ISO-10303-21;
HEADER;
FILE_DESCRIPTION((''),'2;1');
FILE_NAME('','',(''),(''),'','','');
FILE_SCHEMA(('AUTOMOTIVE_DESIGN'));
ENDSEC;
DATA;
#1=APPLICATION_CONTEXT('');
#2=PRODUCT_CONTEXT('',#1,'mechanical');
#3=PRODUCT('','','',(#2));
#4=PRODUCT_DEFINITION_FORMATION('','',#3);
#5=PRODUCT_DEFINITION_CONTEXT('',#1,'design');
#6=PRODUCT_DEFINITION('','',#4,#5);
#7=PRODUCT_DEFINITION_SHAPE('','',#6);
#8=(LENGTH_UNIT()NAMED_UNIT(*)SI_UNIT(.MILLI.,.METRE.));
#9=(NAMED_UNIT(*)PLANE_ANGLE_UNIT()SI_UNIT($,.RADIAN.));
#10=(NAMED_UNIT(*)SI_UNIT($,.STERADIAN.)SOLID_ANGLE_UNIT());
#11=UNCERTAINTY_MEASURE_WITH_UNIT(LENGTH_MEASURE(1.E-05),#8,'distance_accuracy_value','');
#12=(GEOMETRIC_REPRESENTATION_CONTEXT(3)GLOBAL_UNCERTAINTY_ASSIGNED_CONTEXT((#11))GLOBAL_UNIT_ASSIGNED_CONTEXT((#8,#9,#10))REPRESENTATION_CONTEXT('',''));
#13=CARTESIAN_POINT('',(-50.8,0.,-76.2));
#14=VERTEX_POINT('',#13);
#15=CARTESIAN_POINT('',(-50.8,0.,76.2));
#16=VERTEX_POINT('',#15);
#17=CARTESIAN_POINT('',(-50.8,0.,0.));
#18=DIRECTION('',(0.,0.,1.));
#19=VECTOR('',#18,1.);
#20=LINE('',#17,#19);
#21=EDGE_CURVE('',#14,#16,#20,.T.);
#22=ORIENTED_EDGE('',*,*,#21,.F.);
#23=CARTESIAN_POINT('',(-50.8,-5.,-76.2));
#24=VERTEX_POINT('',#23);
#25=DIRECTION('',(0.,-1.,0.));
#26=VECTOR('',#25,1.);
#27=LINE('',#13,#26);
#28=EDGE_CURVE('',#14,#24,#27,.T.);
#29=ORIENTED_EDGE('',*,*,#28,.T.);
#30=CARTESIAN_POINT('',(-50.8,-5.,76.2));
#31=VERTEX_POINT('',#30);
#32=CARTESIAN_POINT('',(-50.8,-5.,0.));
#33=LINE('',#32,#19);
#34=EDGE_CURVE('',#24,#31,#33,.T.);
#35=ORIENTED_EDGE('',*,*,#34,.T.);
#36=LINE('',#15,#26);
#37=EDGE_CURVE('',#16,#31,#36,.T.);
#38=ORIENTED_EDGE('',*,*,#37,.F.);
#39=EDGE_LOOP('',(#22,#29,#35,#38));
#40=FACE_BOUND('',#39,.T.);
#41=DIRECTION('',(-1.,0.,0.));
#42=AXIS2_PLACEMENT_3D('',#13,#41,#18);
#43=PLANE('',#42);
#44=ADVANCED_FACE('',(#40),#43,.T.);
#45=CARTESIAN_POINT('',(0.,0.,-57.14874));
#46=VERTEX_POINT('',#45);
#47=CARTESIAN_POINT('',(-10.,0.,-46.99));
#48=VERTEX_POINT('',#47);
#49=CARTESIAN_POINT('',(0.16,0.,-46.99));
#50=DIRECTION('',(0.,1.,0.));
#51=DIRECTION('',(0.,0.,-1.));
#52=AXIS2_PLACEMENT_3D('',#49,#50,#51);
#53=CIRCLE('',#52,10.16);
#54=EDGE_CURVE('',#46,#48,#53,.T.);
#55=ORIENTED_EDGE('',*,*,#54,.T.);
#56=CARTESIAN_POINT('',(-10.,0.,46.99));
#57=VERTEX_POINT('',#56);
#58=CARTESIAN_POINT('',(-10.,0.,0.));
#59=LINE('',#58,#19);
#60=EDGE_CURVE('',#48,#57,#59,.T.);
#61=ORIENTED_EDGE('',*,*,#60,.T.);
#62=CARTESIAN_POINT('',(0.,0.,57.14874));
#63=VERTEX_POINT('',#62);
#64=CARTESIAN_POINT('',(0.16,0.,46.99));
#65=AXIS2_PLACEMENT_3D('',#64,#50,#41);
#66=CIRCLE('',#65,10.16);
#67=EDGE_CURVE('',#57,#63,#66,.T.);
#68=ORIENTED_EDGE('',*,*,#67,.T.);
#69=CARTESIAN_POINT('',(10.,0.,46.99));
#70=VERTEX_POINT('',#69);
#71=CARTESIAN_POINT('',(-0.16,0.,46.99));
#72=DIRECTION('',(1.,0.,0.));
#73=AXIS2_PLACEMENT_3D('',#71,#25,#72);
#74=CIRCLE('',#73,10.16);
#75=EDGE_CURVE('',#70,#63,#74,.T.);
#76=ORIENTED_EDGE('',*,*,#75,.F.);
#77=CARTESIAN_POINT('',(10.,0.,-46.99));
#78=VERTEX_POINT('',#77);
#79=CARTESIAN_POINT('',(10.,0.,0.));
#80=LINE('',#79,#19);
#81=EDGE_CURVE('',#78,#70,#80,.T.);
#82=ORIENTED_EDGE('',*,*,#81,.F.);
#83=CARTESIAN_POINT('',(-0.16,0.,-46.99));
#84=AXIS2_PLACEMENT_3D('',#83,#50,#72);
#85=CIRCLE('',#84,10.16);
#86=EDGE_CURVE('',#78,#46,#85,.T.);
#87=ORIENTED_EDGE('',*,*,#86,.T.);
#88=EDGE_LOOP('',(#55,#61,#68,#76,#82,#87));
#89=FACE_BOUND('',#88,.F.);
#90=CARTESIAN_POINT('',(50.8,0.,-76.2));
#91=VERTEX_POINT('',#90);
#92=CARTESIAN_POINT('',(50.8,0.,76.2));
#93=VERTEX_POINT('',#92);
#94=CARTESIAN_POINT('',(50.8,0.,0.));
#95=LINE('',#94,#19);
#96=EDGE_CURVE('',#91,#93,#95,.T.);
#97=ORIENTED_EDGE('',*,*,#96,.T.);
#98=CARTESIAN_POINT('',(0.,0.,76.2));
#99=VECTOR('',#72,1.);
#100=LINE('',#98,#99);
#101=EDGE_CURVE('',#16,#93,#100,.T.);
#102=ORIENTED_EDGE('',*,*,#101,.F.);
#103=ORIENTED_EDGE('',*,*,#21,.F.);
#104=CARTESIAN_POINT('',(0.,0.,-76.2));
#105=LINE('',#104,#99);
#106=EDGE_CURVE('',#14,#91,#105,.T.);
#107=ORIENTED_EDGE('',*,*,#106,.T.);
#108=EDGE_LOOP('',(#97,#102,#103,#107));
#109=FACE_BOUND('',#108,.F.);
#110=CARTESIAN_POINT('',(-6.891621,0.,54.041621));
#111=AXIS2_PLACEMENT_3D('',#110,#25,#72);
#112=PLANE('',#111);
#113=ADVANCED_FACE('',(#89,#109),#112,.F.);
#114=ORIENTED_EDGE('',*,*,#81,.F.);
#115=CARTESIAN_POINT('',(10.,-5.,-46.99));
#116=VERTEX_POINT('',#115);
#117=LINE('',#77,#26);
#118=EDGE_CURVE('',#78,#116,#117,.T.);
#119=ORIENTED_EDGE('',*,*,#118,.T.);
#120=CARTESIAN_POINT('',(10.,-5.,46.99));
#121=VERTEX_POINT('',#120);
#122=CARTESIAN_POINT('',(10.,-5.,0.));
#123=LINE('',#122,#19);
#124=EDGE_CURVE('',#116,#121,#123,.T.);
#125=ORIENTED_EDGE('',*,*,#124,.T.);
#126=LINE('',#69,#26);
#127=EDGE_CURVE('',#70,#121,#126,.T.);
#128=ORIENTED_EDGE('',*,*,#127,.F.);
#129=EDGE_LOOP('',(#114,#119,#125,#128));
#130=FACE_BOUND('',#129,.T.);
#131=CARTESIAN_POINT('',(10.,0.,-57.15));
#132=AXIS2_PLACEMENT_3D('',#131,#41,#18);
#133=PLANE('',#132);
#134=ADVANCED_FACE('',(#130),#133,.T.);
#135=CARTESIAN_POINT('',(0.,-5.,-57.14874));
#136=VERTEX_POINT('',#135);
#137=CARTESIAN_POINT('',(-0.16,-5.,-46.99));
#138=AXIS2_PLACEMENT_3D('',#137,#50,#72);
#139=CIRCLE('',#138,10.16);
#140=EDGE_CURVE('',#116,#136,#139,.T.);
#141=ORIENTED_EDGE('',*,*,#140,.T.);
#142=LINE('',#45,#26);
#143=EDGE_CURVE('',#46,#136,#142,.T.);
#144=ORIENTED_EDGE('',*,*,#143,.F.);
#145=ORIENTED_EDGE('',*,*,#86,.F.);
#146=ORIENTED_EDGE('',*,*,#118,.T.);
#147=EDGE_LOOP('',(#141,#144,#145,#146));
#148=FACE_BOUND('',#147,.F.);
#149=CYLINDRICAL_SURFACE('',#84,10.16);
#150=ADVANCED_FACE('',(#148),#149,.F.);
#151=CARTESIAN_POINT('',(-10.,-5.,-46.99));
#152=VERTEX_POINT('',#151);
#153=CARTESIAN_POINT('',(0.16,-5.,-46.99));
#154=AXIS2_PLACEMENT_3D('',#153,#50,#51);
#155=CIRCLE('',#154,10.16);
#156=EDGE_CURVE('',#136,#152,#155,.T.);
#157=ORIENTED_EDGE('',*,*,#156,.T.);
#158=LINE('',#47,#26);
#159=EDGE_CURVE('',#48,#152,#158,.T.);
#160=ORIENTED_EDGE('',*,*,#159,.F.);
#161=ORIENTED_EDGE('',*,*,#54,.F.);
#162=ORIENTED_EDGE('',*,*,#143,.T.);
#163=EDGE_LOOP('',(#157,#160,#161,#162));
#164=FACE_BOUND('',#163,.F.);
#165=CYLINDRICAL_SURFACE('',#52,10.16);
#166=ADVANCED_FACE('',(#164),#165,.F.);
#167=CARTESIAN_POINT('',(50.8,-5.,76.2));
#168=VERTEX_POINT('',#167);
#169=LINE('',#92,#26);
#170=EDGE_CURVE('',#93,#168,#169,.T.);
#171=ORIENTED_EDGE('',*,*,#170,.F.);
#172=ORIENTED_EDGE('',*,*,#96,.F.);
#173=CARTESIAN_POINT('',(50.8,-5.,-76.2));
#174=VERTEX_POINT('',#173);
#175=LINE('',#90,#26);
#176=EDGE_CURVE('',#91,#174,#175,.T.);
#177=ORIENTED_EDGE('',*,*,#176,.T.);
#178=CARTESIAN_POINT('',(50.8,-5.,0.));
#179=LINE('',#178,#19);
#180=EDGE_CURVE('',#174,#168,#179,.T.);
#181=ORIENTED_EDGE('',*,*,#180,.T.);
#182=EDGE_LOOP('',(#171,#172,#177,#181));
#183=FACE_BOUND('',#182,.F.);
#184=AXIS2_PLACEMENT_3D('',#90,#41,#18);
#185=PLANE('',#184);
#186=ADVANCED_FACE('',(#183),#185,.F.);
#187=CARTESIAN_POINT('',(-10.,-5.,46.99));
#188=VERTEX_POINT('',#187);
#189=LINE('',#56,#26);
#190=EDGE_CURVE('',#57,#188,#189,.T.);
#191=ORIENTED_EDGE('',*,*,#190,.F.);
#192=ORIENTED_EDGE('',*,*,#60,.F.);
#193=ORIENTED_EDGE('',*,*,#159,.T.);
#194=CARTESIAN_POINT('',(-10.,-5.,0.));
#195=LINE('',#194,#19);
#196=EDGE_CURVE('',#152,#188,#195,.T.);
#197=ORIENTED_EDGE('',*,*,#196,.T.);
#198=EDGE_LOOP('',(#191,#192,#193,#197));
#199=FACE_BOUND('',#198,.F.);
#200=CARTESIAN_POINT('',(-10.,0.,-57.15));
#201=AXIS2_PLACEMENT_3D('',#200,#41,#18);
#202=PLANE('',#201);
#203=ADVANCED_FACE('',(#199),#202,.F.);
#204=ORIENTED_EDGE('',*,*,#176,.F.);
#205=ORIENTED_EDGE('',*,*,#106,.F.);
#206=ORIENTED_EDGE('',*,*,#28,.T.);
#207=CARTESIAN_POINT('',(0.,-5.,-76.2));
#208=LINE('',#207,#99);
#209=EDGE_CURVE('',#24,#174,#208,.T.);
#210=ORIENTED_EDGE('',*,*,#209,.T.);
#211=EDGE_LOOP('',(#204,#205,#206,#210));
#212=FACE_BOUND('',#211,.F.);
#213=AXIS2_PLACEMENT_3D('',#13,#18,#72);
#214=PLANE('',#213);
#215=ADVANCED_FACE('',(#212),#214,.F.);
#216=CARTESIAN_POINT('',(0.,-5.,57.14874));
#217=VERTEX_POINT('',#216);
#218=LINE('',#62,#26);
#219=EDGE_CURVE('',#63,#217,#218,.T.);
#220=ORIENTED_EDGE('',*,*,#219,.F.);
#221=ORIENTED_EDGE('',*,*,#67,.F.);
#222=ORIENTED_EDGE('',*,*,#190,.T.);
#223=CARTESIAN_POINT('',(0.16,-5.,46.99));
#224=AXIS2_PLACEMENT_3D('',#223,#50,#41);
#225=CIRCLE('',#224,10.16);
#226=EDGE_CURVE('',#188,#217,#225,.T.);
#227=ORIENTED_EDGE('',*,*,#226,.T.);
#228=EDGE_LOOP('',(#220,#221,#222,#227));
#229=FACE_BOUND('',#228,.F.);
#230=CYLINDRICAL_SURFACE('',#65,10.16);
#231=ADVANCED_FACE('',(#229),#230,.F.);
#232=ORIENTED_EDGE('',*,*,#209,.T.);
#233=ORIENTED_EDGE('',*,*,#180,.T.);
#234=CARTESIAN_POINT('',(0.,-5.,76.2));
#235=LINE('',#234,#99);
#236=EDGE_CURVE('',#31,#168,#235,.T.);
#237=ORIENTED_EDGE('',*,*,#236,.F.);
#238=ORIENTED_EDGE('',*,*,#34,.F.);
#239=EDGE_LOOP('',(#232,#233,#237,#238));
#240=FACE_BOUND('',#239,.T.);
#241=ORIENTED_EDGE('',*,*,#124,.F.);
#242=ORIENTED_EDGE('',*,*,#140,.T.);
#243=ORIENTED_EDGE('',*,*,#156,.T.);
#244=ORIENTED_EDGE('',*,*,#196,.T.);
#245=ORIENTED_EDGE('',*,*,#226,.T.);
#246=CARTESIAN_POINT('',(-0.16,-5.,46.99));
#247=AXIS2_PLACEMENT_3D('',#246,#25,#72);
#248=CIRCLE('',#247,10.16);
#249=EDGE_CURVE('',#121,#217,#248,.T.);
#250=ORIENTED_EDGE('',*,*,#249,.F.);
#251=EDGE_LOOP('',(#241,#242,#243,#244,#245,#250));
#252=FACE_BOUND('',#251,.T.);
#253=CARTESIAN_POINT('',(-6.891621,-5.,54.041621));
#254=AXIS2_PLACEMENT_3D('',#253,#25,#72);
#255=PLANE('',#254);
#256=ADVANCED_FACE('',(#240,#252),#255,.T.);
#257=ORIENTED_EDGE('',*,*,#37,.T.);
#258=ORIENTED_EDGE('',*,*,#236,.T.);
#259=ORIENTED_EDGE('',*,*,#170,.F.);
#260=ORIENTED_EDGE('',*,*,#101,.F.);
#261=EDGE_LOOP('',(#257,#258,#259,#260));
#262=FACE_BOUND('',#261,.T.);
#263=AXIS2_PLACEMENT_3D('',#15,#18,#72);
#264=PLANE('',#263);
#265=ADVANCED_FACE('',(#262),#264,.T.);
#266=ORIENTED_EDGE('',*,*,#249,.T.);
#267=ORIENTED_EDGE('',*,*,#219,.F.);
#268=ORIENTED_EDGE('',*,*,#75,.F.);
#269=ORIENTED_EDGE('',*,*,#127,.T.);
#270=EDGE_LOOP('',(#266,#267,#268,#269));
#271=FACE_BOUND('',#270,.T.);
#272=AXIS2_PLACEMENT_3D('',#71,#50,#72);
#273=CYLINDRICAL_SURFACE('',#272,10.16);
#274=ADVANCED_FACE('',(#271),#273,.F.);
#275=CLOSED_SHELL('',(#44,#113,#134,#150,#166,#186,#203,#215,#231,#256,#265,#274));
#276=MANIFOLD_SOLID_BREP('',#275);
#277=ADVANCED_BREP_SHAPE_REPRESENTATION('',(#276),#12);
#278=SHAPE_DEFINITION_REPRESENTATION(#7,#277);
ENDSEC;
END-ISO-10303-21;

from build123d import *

# Parameters (mm, degrees)
F0_W        = 101.6
F0_H        = 152.4
F0_W_2      = 20
F0_H_2      = 114.3
F1_DEPTH    = 5
F2_T1_DEPTH = 5


# Not quite as in the source:
# - a fillet or chamfer that OpenCascade refuses, or shapes differently, is made with other operations: its cross-section is extruded or revolved along the edge and cut away or added


with BuildPart() as f1:
    # F0 (on Front) → F1 (new body)
    with BuildSketch(Plane.XZ):
        Rectangle(F0_W, F0_H)
        Rectangle(F0_W_2, F0_H_2, mode=Mode.SUBTRACT)
    extrude(amount=F1_DEPTH)

    # F2: fillet of radius 10.16 on 4 edges, made by hand

    # F2_s2 → F2_t1 (join)
    with BuildSketch(Plane.XZ):
        with BuildLine():
            ThreePointArc((-10, 46.99), (-7.0242048969, 54.1742048969), (0.16, 57.15))
            Line((0.16, 57.15), (-10, 57.15))
            Line((-10, 57.15), (-10, 46.99))
        make_face()
        with BuildLine():
            ThreePointArc((10, 46.99), (7.0242048969, 54.1742048969), (-0.16, 57.15))
            Line((-0.16, 57.15), (10, 57.15))
            Line((10, 57.15), (10, 46.99))
        make_face()
        with BuildLine():
            ThreePointArc((10, -46.99), (7.0242048969, -54.1742048969), (-0.16, -57.15))
            Line((-0.16, -57.15), (10, -57.15))
            Line((10, -57.15), (10, -46.99))
        make_face()
        with BuildLine():
            ThreePointArc((0.16, -57.15), (-7.0242048969, -54.1742048969), (-10, -46.99))
            Line((-10, -46.99), (-10, -57.15))
            Line((-10, -57.15), (0.16, -57.15))
        make_face()
    extrude(amount=F2_T1_DEPTH)


solid = f1.part
